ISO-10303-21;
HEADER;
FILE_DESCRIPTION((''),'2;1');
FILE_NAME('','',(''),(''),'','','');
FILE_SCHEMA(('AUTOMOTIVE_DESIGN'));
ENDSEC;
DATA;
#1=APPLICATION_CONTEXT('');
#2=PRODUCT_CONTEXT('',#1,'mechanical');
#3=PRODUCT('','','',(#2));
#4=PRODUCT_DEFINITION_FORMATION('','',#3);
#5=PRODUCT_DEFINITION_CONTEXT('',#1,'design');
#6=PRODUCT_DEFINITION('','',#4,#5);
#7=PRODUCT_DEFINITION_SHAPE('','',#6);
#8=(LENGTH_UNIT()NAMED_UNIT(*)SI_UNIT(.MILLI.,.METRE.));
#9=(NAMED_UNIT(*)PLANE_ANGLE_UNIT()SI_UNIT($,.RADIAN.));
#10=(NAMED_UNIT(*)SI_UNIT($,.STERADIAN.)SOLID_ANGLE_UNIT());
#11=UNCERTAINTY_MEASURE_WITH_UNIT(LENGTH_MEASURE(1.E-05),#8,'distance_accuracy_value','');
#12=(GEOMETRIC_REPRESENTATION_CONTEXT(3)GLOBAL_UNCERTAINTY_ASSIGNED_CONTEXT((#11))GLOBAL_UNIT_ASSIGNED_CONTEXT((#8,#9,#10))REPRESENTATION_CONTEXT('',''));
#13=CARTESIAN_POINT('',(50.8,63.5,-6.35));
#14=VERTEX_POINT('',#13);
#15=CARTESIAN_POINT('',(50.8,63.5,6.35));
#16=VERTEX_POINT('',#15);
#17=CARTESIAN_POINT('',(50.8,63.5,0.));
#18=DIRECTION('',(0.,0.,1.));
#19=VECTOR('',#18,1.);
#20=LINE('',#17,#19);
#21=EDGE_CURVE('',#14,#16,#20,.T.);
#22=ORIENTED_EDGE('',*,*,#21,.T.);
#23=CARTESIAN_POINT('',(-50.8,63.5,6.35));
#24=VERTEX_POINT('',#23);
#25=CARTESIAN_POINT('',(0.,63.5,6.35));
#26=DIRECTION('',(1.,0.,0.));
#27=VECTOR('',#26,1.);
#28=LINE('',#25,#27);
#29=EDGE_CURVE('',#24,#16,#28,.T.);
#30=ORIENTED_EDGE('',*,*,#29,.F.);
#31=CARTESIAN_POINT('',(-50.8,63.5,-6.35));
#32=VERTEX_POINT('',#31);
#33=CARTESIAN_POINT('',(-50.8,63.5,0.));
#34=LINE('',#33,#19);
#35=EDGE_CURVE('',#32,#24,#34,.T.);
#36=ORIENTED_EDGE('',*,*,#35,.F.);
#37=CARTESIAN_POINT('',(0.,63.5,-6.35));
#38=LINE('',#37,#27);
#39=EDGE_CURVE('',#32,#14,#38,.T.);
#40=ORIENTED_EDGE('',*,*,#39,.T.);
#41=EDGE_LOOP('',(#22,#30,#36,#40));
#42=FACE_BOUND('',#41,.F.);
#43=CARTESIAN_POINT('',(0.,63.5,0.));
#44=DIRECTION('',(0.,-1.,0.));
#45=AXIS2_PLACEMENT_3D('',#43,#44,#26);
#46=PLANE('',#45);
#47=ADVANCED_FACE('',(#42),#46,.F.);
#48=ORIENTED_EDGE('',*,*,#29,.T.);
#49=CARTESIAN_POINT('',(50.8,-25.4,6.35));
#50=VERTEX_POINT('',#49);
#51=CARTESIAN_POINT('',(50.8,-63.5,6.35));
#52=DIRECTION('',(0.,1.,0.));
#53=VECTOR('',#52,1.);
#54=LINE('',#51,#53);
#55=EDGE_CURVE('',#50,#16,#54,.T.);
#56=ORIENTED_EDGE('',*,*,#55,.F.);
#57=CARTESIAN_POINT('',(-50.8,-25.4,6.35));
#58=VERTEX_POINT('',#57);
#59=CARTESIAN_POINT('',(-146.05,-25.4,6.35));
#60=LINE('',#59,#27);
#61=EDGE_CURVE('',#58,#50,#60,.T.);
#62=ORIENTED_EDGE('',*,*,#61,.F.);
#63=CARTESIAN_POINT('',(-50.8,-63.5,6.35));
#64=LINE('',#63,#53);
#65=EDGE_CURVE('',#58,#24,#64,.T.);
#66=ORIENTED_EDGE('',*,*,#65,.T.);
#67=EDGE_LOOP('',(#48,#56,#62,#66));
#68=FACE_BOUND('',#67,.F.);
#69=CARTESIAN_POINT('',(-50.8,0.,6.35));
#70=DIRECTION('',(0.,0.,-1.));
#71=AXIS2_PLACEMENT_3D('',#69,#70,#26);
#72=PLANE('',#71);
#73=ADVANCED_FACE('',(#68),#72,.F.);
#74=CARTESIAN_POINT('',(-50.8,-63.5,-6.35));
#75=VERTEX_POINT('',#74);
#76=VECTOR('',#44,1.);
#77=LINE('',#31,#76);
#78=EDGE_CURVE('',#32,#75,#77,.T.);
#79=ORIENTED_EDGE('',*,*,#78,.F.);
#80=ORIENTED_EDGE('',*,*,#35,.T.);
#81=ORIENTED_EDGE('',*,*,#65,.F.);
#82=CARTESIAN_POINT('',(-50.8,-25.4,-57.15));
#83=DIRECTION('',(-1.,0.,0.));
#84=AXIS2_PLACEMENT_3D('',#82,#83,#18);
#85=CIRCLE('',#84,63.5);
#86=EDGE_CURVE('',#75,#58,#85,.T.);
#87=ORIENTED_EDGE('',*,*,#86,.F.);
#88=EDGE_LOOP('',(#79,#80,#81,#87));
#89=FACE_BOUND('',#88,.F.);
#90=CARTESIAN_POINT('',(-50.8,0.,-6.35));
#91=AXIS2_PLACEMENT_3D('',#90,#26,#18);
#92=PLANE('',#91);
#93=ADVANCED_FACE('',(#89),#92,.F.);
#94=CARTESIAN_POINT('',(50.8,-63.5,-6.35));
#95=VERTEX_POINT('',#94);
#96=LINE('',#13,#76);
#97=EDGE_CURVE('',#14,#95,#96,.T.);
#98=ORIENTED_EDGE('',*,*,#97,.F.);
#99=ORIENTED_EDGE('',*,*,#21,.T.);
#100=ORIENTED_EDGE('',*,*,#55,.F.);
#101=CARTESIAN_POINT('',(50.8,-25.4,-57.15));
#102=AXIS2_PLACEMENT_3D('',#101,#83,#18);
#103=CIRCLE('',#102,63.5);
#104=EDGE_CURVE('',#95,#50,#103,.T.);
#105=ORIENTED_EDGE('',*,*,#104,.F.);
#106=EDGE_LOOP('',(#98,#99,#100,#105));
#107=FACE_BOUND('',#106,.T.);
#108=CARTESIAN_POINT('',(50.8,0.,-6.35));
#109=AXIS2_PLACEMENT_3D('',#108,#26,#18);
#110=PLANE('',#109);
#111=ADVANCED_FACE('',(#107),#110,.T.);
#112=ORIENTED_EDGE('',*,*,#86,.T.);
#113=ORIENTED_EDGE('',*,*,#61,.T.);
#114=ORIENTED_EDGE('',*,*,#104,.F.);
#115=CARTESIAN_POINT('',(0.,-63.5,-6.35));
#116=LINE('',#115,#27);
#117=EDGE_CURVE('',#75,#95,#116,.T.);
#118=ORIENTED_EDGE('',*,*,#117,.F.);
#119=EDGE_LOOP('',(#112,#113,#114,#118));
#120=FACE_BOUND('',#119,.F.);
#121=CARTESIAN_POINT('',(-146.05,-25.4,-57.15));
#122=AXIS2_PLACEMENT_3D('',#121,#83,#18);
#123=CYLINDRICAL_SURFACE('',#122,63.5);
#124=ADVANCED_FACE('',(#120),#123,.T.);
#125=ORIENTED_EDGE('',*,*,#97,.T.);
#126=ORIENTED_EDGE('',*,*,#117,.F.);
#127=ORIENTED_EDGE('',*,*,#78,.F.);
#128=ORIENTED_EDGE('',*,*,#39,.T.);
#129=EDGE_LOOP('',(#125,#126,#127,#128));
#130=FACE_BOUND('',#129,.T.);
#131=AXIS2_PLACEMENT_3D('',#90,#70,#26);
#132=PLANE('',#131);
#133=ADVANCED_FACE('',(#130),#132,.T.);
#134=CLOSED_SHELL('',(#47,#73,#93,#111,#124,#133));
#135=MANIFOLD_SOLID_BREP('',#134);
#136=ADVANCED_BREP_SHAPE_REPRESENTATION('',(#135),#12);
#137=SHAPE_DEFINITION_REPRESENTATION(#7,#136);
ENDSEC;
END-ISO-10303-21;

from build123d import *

# Parameters (mm, degrees)
F0_W          = 101.6
F0_H          = 12.7
F1_DEPTH      = 63.5
F1_DEPTH_BACK = 63.5
F2_T1_DEPTH   = 292.1


# Not quite as in the source:
# - a fillet or chamfer that OpenCascade refuses, or shapes differently, is made with other operations: its cross-section is extruded or revolved along the edge and cut away or added


with BuildPart() as f1:
    # F0 (on Front) → F1 (new body, two sides)
    with BuildSketch(Plane.XZ) as f1_sk:
        Rectangle(F0_W, F0_H)
    extrude(amount=F1_DEPTH)
    extrude(f1_sk.sketch, amount=-F1_DEPTH_BACK)

    # F2: fillet of radius 63.5 on 1 edges, made by hand

    # F2_s2 → F2_t1 (cut)
    with BuildSketch(Plane.YZ.offset(-146.05)):
        with BuildLine():
            ThreePointArc((-25.4, 6.35), (-45.4804631421, 3.0913894262), (-63.5, -6.35))
            Line((-63.5, -6.35), (-63.5, 6.35))
            Line((-63.5, 6.35), (-25.4, 6.35))
        make_face()
    extrude(amount=F2_T1_DEPTH, mode=Mode.SUBTRACT)


solid = f1.part
